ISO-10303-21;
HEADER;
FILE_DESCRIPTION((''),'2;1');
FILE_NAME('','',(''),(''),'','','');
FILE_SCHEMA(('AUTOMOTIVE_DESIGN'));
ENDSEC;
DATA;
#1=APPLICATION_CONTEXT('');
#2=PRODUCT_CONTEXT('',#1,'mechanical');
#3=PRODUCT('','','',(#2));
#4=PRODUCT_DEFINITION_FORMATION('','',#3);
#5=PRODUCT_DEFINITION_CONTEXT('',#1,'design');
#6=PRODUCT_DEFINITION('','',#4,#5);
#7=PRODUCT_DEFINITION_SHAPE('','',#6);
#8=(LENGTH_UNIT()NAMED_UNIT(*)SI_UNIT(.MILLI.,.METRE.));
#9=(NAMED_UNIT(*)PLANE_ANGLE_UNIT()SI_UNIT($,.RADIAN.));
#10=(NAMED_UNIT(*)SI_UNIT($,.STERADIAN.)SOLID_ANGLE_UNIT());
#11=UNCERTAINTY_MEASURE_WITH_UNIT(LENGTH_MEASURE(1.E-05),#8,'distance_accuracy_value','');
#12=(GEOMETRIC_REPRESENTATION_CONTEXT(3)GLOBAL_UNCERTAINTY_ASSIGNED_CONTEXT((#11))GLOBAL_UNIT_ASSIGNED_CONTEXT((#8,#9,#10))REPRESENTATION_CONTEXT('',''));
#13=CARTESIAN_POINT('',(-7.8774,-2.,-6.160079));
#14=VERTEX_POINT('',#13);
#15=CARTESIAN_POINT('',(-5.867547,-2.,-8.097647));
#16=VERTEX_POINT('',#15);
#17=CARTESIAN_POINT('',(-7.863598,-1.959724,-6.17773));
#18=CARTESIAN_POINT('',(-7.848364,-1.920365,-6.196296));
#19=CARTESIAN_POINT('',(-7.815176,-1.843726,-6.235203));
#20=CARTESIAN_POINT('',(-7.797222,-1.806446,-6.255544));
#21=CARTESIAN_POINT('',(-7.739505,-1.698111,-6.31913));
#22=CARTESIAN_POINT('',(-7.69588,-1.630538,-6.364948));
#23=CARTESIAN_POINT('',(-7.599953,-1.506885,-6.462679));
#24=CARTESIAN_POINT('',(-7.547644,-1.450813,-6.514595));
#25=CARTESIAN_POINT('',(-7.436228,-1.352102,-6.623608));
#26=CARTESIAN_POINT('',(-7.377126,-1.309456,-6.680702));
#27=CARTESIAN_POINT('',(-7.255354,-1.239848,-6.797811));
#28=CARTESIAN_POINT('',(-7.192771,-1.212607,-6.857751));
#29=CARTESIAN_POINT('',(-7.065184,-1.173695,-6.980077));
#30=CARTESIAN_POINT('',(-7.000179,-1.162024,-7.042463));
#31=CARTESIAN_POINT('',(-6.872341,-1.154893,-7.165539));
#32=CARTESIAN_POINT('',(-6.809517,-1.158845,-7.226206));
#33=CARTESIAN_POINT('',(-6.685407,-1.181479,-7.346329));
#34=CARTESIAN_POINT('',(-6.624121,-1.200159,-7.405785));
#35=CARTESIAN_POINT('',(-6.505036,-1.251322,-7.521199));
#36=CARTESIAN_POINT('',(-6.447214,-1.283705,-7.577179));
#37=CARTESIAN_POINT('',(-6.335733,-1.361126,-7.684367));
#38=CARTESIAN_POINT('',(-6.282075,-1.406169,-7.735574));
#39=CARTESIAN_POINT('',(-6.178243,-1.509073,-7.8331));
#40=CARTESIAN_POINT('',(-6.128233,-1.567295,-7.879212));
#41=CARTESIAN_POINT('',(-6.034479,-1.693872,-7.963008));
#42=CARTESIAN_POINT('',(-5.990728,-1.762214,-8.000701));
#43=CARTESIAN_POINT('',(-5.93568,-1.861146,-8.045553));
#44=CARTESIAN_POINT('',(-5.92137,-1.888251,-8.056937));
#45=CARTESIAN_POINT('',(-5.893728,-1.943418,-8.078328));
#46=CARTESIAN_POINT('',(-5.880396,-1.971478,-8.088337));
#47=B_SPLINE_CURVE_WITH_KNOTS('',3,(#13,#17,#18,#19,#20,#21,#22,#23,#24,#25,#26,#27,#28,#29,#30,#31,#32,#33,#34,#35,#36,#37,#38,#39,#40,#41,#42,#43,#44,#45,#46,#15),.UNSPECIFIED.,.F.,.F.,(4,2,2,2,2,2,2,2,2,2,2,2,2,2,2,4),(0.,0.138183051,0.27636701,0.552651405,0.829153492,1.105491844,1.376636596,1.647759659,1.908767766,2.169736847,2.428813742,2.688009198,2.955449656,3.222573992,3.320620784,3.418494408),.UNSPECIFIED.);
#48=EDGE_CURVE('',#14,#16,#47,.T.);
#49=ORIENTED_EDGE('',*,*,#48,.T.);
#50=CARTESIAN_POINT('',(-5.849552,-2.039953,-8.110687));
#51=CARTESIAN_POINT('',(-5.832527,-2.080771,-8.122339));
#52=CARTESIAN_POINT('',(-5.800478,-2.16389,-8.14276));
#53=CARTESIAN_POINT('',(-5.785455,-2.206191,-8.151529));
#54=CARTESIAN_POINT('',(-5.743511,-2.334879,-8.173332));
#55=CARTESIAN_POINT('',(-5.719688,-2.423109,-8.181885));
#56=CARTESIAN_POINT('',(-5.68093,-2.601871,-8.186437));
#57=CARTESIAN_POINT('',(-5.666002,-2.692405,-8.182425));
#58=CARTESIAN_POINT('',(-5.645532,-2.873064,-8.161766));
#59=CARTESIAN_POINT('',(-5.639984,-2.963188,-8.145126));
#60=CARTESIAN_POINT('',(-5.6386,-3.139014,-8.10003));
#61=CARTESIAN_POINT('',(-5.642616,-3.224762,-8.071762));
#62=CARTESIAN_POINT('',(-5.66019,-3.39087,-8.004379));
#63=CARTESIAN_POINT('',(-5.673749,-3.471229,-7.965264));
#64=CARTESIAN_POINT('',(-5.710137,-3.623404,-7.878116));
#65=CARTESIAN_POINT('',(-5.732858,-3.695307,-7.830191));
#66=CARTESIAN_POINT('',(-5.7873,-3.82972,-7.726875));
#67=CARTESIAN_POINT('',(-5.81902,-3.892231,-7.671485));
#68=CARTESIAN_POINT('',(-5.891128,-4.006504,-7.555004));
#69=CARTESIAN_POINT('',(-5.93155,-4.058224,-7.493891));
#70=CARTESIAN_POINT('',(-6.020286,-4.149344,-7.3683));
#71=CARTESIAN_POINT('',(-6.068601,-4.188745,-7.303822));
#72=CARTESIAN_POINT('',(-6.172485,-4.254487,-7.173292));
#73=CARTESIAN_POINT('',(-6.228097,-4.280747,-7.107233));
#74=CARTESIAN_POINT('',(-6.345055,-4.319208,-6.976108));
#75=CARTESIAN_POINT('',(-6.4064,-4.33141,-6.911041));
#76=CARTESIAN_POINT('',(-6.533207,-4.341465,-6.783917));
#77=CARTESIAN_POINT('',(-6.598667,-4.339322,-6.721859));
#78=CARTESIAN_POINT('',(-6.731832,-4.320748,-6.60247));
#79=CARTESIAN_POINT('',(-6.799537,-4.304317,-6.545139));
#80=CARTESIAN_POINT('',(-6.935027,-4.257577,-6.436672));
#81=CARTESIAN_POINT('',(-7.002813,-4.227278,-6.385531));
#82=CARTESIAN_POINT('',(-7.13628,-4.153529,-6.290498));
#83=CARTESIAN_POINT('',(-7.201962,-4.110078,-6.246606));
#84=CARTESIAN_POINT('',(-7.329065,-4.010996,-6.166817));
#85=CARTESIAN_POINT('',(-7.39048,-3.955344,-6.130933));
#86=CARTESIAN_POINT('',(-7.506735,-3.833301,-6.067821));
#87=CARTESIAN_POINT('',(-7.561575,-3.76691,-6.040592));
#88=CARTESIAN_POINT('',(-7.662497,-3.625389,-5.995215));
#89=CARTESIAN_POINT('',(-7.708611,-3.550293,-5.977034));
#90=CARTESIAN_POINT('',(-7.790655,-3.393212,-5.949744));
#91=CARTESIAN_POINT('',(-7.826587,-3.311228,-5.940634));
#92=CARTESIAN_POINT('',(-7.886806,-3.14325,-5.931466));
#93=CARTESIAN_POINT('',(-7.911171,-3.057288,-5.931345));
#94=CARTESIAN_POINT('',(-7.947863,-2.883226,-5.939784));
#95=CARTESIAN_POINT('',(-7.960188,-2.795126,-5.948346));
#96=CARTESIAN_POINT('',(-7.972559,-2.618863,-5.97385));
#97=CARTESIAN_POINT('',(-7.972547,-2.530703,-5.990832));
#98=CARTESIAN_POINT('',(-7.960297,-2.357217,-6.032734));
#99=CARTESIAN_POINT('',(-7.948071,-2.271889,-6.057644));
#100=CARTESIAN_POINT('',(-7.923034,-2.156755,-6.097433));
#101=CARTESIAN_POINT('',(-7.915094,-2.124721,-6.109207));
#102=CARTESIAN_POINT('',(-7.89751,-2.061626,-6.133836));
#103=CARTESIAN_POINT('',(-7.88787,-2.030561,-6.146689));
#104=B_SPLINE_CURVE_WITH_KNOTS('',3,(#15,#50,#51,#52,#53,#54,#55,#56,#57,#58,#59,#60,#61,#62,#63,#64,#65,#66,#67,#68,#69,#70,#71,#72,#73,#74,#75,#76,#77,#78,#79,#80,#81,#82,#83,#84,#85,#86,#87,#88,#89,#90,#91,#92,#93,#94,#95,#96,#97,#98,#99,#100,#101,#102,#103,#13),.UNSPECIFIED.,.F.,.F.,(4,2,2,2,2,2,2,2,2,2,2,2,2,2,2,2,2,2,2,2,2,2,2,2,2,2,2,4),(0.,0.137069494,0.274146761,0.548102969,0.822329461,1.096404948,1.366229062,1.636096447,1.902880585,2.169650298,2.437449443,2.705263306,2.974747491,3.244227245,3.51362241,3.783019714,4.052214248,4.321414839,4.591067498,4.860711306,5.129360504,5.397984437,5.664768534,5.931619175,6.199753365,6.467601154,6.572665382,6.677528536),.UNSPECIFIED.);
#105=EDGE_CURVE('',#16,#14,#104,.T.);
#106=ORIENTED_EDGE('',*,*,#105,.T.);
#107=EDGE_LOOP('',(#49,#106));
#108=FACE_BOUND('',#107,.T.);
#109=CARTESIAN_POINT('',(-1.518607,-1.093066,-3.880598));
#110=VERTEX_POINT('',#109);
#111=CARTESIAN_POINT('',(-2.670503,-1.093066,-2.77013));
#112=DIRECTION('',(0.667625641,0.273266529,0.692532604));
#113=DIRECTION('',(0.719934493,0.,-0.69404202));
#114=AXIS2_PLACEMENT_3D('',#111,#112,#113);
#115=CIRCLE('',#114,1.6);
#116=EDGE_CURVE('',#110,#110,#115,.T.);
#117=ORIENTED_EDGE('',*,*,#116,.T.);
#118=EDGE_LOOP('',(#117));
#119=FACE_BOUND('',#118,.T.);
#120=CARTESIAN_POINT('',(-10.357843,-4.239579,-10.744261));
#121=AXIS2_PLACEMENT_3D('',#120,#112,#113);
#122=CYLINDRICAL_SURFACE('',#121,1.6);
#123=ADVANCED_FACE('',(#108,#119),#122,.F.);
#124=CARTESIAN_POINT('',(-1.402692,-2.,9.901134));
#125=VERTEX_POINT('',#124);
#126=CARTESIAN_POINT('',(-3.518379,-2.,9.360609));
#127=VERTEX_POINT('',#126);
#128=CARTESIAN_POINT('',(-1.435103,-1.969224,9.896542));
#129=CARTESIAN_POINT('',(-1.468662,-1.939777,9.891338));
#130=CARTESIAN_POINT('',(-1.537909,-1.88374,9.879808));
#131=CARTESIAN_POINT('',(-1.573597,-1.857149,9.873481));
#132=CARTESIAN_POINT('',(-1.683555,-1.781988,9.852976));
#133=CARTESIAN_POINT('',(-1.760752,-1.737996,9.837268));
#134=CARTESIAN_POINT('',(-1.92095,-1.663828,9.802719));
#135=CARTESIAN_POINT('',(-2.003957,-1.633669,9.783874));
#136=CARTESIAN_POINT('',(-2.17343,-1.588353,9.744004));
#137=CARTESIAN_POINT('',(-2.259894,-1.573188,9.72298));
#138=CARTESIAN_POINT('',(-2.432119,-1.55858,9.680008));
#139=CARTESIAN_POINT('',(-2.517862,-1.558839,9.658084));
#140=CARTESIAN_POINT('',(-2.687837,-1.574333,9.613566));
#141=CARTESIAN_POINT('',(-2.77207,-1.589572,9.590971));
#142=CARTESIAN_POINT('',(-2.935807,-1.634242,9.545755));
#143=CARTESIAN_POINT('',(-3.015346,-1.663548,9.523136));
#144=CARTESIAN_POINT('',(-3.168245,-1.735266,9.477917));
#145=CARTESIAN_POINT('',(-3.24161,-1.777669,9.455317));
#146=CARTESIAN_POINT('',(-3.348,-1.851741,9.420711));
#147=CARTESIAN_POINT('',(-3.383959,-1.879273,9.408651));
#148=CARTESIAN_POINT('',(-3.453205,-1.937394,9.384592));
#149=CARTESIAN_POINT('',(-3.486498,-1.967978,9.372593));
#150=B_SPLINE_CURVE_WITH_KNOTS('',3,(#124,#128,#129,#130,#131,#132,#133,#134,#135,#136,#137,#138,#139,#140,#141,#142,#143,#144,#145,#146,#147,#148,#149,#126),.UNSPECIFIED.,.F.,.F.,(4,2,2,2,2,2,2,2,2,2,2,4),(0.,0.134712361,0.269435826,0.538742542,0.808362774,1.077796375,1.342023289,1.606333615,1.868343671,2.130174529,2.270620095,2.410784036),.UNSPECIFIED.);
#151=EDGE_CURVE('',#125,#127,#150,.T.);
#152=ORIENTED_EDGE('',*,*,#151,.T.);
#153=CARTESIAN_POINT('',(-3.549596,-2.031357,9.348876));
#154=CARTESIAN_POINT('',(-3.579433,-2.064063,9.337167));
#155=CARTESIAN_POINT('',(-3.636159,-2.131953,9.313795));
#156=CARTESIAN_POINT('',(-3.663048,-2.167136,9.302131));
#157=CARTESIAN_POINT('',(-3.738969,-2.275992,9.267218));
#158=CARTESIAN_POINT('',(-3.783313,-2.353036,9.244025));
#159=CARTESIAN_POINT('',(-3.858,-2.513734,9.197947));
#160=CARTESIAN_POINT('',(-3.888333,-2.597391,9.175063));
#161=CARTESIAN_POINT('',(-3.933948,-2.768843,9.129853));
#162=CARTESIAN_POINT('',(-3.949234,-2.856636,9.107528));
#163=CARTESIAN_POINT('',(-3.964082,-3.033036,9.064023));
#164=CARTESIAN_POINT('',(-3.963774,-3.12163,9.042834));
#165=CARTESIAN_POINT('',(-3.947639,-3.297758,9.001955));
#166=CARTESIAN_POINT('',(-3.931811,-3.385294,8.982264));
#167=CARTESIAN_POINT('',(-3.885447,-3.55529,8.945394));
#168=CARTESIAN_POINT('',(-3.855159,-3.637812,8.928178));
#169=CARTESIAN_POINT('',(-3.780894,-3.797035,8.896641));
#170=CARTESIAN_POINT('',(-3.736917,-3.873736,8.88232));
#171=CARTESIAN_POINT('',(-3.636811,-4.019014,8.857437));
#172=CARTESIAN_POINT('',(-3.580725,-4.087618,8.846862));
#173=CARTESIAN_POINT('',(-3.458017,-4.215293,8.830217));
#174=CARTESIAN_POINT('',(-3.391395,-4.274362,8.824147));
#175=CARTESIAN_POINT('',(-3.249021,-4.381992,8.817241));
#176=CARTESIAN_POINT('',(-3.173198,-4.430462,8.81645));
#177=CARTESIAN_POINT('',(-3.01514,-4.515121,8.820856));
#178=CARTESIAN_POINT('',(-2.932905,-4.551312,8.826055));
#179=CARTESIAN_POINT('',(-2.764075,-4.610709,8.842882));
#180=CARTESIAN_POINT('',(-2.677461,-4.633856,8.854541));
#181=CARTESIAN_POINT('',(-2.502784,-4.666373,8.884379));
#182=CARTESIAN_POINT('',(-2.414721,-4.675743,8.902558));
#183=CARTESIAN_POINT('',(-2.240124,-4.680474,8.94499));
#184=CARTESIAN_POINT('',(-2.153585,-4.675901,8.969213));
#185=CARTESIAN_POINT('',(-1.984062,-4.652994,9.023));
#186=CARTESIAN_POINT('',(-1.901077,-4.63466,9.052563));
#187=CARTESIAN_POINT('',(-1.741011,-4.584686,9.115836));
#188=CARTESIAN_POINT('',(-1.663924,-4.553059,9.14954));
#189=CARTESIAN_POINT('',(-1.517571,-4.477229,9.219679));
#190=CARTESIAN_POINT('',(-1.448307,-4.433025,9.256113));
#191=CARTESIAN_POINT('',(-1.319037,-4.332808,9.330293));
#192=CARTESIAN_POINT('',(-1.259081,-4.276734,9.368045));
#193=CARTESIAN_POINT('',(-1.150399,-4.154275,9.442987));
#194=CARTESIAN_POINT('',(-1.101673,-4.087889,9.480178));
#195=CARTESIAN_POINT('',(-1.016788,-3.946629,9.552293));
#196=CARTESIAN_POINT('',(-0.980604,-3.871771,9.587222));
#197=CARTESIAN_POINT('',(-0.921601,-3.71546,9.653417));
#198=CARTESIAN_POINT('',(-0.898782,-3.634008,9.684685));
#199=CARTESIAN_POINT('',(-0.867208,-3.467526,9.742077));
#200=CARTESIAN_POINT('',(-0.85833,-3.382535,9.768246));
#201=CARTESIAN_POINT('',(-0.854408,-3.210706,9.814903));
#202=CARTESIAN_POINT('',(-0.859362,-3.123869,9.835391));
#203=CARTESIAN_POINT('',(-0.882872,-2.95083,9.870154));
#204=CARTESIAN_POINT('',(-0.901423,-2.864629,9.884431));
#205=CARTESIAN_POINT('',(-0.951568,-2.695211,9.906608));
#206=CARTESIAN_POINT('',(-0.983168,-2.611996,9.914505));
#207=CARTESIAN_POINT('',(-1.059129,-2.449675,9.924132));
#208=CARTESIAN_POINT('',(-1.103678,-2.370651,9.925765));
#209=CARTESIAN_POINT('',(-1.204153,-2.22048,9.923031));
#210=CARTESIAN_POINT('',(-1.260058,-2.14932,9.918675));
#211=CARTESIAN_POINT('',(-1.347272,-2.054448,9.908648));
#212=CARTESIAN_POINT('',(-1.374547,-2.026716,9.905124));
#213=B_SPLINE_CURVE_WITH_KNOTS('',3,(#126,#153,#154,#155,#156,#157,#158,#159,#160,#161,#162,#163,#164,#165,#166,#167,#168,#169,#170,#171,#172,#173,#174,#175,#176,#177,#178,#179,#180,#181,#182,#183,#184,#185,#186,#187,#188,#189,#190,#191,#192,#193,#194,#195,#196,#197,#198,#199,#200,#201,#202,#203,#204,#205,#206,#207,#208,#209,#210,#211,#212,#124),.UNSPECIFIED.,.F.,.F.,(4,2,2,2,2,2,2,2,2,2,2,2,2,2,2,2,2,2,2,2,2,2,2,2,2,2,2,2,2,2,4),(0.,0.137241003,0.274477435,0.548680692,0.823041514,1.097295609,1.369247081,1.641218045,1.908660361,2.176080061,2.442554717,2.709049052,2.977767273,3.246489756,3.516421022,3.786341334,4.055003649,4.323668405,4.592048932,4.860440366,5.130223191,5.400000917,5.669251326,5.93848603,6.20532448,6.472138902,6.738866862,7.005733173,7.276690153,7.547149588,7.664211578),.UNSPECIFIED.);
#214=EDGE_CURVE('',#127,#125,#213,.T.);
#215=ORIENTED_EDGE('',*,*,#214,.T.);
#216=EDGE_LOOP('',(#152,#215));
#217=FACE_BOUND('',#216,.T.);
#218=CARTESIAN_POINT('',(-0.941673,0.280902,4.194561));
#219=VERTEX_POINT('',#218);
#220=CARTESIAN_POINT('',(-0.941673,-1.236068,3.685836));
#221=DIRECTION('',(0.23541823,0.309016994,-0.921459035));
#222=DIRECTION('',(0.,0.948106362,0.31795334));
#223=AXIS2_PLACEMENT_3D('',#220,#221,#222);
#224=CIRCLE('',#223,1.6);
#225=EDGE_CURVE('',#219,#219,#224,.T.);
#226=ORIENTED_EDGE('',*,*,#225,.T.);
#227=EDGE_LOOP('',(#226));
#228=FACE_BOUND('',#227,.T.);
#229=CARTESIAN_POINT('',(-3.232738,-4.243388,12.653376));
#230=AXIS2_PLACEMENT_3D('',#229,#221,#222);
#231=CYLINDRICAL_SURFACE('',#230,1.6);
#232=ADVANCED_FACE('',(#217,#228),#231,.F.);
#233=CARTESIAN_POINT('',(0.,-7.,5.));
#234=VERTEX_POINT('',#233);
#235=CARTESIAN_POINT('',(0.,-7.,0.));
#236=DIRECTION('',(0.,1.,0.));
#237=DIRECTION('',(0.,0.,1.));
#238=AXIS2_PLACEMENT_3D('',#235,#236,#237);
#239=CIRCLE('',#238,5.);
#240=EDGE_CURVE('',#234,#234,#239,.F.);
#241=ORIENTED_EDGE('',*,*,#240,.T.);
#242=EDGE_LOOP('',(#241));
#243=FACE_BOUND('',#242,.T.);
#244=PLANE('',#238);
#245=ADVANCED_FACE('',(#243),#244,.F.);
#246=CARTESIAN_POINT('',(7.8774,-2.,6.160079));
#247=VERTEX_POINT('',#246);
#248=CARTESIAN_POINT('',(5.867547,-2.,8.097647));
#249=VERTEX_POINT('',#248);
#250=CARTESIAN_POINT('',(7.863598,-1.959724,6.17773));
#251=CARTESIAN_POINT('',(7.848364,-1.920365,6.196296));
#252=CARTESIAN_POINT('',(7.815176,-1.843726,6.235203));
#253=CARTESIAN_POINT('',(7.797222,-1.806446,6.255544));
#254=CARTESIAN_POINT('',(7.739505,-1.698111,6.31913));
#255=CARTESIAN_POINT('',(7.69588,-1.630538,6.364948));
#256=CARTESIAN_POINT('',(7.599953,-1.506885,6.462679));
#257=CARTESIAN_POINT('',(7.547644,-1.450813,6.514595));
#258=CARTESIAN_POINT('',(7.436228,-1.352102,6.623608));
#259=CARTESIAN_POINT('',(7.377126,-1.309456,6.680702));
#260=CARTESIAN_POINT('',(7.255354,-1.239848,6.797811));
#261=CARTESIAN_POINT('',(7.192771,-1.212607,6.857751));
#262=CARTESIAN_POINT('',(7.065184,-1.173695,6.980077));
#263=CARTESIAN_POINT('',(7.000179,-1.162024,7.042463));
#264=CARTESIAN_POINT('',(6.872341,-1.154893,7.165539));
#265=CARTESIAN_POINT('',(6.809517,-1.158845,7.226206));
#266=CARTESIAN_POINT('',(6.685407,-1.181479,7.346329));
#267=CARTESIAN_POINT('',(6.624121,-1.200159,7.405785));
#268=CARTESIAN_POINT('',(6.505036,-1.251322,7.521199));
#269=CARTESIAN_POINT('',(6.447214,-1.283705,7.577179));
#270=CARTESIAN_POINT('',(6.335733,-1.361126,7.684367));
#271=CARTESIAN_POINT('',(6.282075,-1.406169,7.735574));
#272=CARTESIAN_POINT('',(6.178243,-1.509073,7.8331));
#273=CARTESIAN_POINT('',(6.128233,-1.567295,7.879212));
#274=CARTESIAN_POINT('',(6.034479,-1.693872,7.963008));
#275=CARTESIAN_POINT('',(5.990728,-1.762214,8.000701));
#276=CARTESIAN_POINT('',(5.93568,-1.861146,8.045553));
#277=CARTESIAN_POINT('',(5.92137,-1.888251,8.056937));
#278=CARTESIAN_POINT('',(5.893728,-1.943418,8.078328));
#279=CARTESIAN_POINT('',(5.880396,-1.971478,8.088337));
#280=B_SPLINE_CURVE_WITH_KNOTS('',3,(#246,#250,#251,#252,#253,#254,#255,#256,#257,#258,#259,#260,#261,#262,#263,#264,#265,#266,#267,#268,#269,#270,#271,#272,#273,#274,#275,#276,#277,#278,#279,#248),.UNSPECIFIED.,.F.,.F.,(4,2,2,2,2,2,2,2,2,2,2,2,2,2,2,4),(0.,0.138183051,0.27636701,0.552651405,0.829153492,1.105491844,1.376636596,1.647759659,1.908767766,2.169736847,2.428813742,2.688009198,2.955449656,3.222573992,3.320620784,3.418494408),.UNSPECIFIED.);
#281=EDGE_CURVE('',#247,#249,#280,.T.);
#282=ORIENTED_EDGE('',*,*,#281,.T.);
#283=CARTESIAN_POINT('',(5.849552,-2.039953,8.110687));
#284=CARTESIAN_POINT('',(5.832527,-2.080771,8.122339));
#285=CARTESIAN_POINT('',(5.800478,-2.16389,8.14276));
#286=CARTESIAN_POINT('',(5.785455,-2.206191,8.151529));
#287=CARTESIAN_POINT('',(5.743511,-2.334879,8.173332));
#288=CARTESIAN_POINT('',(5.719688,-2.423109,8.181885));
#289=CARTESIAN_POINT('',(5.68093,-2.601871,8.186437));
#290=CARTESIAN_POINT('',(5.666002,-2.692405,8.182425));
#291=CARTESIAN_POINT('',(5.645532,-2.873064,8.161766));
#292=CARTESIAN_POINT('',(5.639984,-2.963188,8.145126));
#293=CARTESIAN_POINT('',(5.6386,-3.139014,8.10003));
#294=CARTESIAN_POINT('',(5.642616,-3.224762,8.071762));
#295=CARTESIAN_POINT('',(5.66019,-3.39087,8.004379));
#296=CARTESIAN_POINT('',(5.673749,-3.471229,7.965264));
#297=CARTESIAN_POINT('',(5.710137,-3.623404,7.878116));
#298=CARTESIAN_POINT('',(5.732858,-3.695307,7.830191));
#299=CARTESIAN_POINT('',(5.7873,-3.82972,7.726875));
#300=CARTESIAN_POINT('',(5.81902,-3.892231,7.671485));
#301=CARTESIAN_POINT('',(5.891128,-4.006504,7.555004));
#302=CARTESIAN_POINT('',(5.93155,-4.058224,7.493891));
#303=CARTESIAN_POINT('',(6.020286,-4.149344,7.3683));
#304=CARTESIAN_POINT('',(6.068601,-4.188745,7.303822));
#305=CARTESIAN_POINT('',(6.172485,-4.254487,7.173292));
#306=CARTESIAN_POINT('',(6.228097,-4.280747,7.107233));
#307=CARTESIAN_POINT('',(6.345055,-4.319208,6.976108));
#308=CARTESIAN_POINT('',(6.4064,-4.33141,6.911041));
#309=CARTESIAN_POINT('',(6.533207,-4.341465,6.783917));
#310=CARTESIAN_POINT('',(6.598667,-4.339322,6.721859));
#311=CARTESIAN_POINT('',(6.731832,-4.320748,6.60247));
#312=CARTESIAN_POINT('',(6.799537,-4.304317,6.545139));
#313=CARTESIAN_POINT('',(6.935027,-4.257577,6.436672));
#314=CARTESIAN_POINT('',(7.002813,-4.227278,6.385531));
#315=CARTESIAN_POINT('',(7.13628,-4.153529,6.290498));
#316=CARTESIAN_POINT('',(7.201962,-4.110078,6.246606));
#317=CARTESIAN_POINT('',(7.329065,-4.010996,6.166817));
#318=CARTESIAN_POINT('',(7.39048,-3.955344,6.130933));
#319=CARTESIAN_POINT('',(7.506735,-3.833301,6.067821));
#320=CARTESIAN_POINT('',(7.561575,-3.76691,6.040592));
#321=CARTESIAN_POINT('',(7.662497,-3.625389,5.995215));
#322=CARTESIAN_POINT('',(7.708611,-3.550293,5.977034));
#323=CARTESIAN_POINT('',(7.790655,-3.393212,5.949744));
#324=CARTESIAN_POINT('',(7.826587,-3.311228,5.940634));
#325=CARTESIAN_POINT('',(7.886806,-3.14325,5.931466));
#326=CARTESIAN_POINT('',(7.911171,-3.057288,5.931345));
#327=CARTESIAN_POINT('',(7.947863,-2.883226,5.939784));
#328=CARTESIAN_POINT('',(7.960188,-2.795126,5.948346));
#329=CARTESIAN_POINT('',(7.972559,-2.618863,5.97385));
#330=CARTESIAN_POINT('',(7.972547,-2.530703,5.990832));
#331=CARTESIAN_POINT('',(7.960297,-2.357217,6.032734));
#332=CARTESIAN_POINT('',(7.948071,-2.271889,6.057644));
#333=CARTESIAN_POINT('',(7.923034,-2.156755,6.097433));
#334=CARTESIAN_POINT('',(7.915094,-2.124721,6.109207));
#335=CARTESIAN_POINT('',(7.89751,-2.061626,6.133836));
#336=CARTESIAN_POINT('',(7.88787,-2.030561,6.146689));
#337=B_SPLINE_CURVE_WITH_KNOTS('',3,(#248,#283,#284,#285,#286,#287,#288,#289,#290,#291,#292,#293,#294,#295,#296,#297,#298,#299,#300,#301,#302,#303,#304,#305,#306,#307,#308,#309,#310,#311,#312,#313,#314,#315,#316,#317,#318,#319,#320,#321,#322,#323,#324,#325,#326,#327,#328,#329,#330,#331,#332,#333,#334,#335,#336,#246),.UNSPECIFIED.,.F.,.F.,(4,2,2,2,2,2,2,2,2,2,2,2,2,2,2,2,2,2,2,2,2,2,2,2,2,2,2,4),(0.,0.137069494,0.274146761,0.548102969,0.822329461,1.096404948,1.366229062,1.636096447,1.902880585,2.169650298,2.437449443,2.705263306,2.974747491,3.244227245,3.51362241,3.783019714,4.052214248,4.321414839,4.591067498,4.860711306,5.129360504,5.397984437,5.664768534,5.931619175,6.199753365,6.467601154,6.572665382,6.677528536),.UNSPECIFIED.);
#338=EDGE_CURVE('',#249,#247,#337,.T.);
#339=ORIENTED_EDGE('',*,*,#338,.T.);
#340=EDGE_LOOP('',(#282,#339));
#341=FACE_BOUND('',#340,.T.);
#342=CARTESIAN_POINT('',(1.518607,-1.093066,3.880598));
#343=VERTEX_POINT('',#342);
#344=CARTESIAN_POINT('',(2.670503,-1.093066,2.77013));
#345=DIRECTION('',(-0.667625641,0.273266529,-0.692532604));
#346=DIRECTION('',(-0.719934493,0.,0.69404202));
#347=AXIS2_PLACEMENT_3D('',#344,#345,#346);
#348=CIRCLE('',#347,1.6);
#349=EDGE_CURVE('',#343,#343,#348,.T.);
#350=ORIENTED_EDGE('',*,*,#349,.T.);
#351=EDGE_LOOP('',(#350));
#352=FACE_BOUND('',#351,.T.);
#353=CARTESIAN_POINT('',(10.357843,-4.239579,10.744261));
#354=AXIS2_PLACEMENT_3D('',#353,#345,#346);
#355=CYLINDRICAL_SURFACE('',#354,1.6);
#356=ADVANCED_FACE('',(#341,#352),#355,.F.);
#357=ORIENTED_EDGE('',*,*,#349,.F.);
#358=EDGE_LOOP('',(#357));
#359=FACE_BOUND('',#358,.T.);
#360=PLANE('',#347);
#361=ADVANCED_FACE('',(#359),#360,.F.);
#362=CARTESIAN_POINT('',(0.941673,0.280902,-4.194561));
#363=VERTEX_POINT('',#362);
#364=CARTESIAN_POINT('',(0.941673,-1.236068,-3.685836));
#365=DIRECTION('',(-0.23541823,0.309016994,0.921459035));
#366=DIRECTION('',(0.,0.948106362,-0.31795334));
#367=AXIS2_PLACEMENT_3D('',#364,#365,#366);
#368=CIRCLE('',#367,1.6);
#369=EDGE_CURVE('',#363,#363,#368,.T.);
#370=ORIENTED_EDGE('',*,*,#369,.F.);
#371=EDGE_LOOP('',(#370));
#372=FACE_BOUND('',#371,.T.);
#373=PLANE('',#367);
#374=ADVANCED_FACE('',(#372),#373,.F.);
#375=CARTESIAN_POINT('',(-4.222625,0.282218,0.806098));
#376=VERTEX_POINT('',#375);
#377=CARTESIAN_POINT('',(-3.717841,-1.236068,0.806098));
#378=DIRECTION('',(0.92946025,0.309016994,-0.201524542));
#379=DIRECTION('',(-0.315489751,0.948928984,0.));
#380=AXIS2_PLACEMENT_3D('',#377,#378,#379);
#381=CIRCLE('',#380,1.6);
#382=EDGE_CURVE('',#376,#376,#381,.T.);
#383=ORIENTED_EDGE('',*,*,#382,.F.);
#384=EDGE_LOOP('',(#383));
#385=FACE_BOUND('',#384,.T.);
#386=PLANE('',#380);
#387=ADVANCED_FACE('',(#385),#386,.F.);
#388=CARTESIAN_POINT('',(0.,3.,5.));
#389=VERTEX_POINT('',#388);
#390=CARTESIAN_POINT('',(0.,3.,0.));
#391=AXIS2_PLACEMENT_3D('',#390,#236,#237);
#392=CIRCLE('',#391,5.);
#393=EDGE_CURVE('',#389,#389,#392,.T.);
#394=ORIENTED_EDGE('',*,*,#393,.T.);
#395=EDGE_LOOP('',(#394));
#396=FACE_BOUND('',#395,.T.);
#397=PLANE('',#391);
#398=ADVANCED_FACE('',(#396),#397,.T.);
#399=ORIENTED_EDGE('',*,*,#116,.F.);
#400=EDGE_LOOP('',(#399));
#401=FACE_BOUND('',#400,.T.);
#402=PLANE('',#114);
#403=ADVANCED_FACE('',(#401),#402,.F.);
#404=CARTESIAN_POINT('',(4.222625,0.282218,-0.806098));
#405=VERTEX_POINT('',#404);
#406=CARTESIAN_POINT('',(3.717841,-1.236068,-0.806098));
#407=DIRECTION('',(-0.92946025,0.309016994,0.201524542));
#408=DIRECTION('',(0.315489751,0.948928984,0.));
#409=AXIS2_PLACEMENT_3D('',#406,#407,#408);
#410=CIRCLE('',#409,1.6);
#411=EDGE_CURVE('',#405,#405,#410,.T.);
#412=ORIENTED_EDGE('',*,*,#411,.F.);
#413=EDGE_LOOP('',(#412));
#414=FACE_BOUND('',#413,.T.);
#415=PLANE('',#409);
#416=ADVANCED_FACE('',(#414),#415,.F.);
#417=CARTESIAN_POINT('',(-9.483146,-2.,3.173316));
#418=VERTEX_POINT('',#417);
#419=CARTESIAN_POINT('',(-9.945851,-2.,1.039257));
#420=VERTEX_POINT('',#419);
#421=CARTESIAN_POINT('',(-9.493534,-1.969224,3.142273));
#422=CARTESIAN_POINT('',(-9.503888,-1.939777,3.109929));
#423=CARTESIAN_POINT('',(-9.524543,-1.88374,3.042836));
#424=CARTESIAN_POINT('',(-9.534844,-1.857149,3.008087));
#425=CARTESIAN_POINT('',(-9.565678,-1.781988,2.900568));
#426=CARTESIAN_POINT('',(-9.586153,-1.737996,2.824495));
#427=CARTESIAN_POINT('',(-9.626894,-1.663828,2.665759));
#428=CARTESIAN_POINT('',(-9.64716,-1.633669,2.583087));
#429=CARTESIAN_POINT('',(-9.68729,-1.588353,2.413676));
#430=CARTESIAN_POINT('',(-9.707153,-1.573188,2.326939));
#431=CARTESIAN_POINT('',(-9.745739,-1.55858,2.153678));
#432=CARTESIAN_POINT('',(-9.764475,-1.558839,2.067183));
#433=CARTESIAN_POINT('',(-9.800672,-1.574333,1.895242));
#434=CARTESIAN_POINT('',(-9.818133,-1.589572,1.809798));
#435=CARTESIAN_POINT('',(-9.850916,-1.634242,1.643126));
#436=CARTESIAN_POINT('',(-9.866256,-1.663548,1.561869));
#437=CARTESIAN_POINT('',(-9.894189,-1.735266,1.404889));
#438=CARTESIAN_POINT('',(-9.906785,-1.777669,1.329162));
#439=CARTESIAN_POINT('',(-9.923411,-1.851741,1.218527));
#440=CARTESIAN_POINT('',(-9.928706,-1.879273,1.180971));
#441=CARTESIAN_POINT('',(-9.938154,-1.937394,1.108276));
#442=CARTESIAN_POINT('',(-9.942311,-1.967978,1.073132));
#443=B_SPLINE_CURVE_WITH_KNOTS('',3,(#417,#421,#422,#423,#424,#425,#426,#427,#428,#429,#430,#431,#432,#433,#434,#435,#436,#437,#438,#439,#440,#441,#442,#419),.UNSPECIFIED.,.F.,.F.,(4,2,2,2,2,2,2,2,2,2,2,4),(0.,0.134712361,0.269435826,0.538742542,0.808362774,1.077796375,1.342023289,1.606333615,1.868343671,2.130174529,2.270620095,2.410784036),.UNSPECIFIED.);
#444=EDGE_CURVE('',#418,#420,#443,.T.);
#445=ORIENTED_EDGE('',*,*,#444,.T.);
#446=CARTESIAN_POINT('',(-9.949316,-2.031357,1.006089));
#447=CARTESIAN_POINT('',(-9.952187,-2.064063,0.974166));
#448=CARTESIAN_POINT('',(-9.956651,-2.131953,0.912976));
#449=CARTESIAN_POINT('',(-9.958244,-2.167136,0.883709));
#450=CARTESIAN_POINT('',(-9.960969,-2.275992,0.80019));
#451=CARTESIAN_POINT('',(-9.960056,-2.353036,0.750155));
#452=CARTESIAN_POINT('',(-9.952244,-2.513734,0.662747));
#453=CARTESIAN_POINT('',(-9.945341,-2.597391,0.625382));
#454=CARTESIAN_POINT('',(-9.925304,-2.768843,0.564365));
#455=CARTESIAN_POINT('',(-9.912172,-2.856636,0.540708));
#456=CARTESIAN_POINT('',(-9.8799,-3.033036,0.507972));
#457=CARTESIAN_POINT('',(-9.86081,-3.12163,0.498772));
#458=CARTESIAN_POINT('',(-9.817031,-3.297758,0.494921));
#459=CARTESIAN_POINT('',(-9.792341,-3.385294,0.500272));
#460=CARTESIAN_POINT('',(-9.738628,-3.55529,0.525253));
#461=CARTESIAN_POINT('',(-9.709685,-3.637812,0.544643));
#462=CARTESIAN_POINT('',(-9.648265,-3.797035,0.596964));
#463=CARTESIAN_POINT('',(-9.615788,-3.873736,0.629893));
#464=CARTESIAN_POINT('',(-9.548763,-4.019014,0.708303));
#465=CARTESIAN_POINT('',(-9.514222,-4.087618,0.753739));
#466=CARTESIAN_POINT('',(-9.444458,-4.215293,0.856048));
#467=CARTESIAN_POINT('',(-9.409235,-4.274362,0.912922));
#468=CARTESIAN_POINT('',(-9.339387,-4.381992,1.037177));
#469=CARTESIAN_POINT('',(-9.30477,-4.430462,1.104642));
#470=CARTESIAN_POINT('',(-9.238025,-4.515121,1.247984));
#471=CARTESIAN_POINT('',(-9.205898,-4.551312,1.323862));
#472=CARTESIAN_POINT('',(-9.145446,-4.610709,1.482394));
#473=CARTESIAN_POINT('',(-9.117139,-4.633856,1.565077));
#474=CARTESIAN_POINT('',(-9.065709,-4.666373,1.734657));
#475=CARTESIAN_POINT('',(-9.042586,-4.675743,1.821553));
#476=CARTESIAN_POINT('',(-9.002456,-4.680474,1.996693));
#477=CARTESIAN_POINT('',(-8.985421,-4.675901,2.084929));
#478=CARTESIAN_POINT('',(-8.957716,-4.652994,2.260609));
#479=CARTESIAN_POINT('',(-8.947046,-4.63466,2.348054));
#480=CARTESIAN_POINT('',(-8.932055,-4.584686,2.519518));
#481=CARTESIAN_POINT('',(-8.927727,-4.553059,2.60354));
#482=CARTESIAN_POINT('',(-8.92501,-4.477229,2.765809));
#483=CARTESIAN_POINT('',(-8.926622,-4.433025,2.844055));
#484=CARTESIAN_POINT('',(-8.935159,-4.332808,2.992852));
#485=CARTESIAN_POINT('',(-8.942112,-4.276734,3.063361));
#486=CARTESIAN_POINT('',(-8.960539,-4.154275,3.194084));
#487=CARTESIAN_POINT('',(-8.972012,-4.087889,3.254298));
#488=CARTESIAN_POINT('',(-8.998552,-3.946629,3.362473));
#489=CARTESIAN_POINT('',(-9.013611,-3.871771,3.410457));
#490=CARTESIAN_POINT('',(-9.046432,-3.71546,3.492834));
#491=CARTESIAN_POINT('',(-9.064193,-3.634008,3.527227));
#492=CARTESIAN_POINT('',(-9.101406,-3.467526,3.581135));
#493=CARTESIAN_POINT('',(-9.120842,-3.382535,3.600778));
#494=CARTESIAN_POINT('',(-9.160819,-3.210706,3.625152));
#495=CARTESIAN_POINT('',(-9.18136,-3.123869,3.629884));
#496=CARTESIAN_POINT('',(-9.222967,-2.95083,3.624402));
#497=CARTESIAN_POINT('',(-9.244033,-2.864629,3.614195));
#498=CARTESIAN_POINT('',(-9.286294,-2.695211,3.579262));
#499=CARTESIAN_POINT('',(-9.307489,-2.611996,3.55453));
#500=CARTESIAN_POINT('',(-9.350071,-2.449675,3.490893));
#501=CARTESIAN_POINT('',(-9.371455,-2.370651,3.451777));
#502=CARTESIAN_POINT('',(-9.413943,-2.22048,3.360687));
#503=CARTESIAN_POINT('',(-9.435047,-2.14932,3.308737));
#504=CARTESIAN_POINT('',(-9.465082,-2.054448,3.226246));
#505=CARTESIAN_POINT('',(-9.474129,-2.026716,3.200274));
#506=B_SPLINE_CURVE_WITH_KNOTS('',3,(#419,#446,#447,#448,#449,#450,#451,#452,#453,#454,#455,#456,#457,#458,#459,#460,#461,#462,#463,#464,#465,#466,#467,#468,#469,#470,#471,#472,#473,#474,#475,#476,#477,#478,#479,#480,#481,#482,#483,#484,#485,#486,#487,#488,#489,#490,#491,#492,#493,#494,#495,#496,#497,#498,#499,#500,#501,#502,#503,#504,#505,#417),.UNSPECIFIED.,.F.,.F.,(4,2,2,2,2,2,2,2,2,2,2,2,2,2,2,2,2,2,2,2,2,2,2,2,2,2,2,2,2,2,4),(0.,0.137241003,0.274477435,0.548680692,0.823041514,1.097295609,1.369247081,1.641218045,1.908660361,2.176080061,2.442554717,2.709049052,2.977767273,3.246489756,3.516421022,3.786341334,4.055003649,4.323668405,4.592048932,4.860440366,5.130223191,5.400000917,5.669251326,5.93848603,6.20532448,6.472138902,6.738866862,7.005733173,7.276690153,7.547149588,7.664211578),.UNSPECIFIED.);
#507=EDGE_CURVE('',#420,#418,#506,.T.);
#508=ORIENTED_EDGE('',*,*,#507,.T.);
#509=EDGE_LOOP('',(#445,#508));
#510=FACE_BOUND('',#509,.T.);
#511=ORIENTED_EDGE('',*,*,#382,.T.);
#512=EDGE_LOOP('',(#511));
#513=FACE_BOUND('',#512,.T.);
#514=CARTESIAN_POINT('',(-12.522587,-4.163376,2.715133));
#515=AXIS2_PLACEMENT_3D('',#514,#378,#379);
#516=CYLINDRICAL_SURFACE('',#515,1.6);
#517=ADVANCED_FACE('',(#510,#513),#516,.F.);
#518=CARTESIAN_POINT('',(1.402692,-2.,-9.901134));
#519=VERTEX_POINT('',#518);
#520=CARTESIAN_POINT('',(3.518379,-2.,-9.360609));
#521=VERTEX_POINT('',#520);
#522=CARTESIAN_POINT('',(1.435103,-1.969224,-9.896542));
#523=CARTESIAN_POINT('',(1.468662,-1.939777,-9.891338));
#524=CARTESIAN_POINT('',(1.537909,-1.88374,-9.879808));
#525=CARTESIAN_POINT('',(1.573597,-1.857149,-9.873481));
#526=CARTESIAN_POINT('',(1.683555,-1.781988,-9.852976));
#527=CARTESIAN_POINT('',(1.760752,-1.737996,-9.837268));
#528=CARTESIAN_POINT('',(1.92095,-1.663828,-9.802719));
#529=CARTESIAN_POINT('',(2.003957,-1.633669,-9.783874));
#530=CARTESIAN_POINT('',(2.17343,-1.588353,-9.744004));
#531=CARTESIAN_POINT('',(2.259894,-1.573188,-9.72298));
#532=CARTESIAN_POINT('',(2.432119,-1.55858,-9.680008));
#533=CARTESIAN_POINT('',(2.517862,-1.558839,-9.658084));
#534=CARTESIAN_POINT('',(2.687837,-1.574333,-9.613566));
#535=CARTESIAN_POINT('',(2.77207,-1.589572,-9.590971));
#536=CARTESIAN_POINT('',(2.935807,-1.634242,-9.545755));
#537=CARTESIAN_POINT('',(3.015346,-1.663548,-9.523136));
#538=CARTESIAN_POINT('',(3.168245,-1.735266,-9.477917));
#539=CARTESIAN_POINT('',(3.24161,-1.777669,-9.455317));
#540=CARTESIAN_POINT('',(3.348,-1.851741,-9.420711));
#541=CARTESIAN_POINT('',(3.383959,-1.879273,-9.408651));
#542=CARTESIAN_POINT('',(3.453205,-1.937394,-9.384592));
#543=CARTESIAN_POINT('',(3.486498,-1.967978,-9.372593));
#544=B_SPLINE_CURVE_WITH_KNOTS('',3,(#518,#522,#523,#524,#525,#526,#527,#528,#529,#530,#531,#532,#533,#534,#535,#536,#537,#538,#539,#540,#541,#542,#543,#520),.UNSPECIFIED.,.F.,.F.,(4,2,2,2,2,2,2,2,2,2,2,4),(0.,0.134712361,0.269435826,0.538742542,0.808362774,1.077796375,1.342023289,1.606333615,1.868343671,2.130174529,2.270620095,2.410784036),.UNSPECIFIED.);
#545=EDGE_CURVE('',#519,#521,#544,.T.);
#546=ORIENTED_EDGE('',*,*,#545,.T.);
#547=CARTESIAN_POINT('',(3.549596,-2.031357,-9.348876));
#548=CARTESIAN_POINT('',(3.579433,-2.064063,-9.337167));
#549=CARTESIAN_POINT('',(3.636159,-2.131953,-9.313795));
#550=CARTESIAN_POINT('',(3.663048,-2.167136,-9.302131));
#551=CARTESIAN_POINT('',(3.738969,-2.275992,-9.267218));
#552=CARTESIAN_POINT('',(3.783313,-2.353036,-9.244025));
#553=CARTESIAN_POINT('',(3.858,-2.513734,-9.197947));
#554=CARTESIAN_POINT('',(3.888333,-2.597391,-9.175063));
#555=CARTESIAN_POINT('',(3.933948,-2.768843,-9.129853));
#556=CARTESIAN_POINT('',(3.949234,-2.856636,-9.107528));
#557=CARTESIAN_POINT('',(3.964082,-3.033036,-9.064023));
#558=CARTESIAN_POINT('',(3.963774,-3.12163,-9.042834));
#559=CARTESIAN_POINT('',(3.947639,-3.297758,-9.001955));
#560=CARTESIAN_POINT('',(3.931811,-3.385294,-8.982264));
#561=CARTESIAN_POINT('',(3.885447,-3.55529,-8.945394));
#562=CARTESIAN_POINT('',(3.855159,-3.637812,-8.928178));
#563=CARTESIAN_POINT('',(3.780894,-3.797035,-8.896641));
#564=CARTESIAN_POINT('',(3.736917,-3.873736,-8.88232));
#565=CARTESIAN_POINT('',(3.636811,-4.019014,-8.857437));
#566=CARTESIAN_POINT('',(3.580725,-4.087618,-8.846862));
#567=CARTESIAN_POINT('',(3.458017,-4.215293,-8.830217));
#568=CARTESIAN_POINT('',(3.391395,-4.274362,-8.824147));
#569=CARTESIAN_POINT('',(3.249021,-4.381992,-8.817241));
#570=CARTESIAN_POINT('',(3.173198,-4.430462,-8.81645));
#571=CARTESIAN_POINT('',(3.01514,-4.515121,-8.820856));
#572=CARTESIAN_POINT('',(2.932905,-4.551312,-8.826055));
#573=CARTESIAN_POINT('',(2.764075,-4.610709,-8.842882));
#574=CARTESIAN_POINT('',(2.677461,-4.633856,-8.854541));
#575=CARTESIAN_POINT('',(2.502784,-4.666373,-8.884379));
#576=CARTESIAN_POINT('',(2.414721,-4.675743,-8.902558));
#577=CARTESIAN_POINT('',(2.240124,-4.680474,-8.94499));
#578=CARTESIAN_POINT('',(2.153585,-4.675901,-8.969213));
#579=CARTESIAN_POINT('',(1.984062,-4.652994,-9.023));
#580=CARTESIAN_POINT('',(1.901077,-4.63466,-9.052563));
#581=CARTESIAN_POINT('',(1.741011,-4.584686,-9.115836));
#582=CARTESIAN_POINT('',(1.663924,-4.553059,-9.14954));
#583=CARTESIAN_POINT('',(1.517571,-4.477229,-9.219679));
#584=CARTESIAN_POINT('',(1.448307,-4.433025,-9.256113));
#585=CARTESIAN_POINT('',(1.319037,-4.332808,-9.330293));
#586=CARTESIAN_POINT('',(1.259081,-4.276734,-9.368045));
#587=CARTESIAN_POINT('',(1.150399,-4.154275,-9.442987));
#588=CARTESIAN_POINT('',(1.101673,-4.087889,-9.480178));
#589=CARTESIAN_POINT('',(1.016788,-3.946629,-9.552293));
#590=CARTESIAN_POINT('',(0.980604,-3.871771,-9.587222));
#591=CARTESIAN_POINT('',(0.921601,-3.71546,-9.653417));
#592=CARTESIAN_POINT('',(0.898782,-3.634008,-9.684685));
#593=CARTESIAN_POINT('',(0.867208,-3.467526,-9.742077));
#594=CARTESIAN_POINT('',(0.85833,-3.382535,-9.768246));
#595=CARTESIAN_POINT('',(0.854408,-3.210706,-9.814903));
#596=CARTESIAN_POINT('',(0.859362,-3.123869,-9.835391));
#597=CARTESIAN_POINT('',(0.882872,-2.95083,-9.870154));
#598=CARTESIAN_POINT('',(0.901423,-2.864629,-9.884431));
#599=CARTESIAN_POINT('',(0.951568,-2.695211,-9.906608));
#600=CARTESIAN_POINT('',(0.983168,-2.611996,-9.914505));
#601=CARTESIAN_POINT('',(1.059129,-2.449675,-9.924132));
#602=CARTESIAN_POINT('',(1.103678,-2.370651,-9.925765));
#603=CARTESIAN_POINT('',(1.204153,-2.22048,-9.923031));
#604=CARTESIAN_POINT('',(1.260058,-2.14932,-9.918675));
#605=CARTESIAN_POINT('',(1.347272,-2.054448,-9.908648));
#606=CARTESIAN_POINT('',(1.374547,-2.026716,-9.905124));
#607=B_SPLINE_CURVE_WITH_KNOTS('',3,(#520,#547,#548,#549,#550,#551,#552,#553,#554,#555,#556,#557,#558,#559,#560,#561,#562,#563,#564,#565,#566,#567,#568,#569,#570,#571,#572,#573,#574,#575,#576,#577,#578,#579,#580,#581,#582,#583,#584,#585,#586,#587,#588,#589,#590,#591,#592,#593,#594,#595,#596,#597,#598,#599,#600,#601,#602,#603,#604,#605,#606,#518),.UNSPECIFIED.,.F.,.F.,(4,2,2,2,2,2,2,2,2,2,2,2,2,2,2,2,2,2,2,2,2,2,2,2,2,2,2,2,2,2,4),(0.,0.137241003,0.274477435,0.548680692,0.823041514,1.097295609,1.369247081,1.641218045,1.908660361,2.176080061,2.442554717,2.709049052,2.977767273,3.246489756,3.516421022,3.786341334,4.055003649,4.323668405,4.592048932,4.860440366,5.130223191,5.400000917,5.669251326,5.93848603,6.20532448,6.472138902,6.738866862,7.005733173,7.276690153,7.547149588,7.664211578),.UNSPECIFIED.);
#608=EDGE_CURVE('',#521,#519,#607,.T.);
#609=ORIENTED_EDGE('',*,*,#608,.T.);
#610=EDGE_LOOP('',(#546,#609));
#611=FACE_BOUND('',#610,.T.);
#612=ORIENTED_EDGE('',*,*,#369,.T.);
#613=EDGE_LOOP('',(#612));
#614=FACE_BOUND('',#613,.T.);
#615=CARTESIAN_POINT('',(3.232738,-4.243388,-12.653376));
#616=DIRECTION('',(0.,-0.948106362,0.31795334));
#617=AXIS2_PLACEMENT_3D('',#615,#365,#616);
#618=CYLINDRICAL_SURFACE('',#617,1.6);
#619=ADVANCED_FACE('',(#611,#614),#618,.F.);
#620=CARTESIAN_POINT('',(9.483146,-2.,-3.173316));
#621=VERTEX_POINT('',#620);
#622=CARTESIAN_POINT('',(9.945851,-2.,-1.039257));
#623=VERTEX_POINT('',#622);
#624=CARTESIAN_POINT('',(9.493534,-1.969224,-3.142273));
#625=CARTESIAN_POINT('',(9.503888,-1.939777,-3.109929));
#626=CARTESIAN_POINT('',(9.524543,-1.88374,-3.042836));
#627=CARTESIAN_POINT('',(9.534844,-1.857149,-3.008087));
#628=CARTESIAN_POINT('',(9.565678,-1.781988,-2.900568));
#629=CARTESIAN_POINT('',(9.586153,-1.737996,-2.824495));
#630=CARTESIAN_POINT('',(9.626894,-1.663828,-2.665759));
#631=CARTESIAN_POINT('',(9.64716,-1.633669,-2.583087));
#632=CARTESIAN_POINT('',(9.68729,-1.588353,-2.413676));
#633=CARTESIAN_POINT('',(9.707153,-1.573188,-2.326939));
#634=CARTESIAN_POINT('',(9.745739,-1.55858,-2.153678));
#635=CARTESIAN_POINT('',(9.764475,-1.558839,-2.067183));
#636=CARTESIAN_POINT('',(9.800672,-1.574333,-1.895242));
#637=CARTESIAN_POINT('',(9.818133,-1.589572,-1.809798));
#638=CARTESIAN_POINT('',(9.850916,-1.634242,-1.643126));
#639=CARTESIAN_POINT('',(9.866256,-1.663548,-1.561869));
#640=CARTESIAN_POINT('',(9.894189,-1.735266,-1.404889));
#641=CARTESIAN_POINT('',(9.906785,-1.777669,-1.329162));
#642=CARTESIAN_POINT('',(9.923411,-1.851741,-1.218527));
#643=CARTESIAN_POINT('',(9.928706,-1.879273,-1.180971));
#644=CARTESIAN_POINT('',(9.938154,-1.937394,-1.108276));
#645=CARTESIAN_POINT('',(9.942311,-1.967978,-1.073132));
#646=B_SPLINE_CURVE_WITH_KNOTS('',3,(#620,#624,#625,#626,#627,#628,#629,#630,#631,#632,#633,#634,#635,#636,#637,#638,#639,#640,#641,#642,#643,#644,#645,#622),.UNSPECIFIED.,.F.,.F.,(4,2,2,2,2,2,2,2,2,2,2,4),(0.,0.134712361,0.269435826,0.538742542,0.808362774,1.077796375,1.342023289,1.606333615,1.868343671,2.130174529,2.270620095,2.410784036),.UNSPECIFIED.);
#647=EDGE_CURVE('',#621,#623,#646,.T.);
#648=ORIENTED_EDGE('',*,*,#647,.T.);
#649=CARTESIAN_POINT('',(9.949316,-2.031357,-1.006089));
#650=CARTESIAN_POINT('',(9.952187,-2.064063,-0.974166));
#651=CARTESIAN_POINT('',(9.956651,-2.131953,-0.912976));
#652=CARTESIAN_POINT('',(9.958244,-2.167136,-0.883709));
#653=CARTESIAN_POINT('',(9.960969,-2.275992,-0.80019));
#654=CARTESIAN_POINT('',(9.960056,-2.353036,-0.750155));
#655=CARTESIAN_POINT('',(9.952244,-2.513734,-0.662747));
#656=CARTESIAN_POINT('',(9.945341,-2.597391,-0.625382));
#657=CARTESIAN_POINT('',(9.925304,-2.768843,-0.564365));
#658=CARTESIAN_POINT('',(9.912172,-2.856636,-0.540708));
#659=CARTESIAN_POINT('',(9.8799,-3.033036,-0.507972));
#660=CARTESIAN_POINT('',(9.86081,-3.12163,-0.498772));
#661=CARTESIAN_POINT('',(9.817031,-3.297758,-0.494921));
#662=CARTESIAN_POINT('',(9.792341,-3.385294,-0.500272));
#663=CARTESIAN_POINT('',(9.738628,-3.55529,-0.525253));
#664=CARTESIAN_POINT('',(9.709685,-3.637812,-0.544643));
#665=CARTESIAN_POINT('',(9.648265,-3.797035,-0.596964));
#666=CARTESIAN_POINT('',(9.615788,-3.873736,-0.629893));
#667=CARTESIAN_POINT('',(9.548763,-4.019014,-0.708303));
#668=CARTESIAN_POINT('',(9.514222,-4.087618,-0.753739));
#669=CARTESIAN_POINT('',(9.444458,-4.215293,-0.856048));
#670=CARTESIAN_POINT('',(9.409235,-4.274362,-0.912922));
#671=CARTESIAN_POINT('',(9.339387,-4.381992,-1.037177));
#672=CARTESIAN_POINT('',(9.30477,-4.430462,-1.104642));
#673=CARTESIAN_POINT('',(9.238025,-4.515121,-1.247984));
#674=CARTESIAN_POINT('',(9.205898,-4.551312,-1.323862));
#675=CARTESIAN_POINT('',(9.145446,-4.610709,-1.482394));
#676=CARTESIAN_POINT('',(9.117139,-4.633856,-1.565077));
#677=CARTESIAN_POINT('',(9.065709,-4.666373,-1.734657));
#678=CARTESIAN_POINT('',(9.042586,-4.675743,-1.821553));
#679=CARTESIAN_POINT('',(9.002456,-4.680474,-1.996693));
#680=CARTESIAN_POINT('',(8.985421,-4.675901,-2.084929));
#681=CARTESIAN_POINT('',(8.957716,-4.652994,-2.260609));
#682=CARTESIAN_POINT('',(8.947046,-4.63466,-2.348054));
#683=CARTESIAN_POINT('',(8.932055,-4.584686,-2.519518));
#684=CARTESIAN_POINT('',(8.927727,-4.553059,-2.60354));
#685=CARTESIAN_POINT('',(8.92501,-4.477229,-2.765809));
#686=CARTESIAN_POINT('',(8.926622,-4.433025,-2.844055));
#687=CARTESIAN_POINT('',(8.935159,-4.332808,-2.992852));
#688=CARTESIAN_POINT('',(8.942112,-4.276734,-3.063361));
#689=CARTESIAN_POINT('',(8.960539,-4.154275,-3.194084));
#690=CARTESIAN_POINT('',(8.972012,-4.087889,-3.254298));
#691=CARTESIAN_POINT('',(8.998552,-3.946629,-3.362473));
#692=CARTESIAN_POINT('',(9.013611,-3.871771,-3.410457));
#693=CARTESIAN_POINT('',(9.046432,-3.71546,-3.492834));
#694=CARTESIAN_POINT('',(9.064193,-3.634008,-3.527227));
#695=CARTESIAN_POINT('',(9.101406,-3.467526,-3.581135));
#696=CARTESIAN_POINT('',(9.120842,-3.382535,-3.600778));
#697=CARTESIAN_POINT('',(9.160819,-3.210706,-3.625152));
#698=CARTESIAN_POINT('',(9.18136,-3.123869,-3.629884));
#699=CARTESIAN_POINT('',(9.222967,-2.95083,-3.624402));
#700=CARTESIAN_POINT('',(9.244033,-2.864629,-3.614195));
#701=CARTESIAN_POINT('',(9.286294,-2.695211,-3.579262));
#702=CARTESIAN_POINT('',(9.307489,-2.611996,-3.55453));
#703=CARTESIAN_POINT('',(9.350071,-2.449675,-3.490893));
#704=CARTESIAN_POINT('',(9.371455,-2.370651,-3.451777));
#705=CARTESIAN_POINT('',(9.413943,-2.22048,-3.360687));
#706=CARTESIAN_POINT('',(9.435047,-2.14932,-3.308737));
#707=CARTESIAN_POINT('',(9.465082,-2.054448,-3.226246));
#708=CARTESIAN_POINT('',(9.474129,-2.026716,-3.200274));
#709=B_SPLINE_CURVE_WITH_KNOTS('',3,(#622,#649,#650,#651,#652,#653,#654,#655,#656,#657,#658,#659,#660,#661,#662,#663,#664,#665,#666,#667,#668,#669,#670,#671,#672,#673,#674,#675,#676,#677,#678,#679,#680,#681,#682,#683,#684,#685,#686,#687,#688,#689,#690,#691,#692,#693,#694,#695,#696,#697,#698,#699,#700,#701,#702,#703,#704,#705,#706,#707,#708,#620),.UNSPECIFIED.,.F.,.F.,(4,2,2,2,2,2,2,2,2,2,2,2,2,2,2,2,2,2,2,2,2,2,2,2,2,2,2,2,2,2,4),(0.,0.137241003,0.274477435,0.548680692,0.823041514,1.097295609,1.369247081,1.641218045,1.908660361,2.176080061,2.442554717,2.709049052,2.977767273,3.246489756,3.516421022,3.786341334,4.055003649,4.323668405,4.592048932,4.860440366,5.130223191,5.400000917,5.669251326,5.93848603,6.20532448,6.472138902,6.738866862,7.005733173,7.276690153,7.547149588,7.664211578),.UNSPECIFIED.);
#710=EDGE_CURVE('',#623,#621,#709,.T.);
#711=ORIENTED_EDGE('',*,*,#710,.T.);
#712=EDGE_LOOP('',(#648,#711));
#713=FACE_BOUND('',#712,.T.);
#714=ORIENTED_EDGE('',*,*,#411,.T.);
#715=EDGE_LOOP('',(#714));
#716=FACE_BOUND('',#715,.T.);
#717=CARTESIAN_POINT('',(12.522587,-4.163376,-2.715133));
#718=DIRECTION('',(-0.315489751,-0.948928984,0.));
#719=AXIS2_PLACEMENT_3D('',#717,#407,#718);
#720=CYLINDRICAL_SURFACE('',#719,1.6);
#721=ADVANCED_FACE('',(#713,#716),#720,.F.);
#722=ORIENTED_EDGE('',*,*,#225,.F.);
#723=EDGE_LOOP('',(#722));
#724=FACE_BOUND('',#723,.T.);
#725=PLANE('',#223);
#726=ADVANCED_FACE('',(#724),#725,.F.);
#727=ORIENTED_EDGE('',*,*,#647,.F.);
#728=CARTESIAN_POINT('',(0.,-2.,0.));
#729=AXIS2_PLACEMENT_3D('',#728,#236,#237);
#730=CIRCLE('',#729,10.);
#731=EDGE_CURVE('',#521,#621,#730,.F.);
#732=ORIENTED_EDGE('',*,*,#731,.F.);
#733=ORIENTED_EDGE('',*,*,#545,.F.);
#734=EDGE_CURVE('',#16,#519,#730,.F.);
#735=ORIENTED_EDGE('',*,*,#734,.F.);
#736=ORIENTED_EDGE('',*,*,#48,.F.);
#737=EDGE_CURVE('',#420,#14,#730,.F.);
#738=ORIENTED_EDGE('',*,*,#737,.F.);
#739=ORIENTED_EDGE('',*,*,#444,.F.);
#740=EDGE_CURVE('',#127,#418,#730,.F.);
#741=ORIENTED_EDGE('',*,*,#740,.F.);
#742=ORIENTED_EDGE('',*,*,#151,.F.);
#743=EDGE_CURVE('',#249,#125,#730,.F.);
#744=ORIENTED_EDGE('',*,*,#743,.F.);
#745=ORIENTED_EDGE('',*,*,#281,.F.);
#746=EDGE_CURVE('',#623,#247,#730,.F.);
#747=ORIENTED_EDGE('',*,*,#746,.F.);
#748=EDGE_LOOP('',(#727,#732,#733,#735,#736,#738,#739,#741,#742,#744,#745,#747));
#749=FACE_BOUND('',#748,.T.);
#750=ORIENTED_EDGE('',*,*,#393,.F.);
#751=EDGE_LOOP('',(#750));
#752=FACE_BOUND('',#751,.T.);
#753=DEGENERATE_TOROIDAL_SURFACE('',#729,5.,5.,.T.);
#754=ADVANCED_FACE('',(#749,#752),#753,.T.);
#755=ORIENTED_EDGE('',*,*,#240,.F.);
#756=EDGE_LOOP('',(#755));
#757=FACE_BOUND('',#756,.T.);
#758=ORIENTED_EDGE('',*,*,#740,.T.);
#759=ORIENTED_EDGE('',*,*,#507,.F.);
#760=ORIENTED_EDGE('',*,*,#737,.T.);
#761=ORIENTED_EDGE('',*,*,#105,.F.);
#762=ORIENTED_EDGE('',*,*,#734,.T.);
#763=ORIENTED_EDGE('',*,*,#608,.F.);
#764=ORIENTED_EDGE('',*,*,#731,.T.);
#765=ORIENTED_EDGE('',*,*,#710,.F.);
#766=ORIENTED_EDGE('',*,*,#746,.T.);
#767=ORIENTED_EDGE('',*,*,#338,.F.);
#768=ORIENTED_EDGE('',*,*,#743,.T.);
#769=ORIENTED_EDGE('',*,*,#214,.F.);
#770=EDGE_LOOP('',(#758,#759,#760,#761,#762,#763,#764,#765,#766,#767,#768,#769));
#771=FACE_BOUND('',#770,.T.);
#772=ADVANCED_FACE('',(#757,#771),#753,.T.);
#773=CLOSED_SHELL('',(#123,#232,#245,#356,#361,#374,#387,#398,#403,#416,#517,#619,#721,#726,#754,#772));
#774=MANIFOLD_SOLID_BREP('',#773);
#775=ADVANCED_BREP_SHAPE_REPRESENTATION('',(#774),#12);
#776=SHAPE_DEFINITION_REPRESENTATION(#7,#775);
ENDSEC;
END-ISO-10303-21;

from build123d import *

# Parameters (mm, degrees)
BASE_DEPTH        = 3
BASE_DEPTH_BACK   = 7
SKETCH1_R         = 10
SKETCH2_R         = 1.6
HOLE1_DEPTH       = 19.934353276
HOLE1MIRROR_COUNT = 2
SKETCH3_R         = 1.6
HOLE2_DEPTH       = 19.445737601
HOLE2MIRROR_COUNT = 2
SKETCH4_R         = 1.6
HOLE3_DEPTH       = 19.389503466
HOLE3MIRROR_COUNT = 2
FILLET1_R         = 5


with BuildPart() as part:
    # Sketch1 → base (new, two sides: drawn at the far end of the back side and taken through both)
    with BuildSketch(Plane(origin=(0, 0, 0), x_dir=(1, 0, 0), z_dir=(0, 1, 0)).offset(-BASE_DEPTH_BACK)):
        with Locations(Location((0, 0, 0), (0, 0, 270))):
            Circle(SKETCH1_R)
    extrude(amount=BASE_DEPTH + BASE_DEPTH_BACK)

    # Sketch2 → hole1 (cut, through all)
    with BuildSketch(Plane(origin=(2.670502563, -1.093066116, 2.770130417), x_dir=(-0.6558691872850446, 0.22429081675253856, 0.7207837669443827), z_dir=(-0.6676256406563905, 0.27326652891267483, -0.692532604369038))):
        with Locations(Location((0, 0, 0), (0, 0, 346.516491398))):
            Circle(SKETCH2_R)
    hole1 = extrude(amount=-HOLE1_DEPTH, mode=Mode.SUBTRACT)

    # hole1mirror: hole1 ×2 about axis
    hole1mirror_axis = Axis((0, 5.5, 0), (0, -1, 0))
    for i in range(1, HOLE1MIRROR_COUNT):
        add(hole1.rotate(hole1mirror_axis, i * 360 / HOLE1MIRROR_COUNT), mode=Mode.SUBTRACT)

    # Sketch3 → hole2 (cut, through all)
    with BuildSketch(Plane(origin=(-0.941672921, -1.236067977, 3.685836142), x_dir=(-0.9718935871364875, 0.07382318789513377, -0.22354639834264944), z_dir=(0.23541823021467095, 0.3090169943749464, -0.921459035481267))):
        with Locations(Location((0, 0, 0), (0, 0, 90.062171088))):
            Circle(SKETCH3_R)
    hole2 = extrude(amount=-HOLE2_DEPTH, mode=Mode.SUBTRACT)

    # hole2mirror: hole2 ×2 about axis
    hole2mirror_axis = Axis((0, 5.5, 0), (0, -1, 0))
    for i in range(1, HOLE2MIRROR_COUNT):
        add(hole2.rotate(hole2mirror_axis, i * 360 / HOLE2MIRROR_COUNT), mode=Mode.SUBTRACT)

    # Sketch4 → hole3 (cut, through all)
    with BuildSketch(Plane(origin=(-3.717841, -1.236067977, 0.806098168), x_dir=(-0.19123247894507908, -0.06357892752956036, -0.979483465389136), z_dir=(0.9294602499075393, 0.30901699437494623, -0.20152454200243008))):
        with Locations(Location((0, 0, 0), (0, 0, 90))):
            Circle(SKETCH4_R)
    hole3 = extrude(amount=-HOLE3_DEPTH, mode=Mode.SUBTRACT)

    # hole3mirror: hole3 ×2 about axis
    hole3mirror_axis = Axis((0, 5.5, 0), (0, -1, 0))
    for i in range(1, HOLE3MIRROR_COUNT):
        add(hole3.rotate(hole3mirror_axis, i * 360 / HOLE3MIRROR_COUNT), mode=Mode.SUBTRACT)

    # Fillet1
    # the kernel refuses this fillet: 5 mm, written as the material it takes off along each edge
    with BuildSketch(Plane(origin=(0, -7, 0), x_dir=(0, 0, 1), z_dir=(-1, 0, 0))) as fillet1_piece_1:
        with BuildLine():
            CenterArc((10 - FILLET1_R, FILLET1_R), FILLET1_R, 270, 90)
            Line((10 - FILLET1_R, 0), (10, 0))
            Line((10, 0), (10, FILLET1_R))
        make_face()
    revolve(axis=Axis((0, -7, 0), (0, 1, 0)), mode=Mode.SUBTRACT)
    with BuildSketch(Plane(origin=(0, 3, 0), x_dir=(0, 0, 1), z_dir=(-1, 0, 0))) as fillet1_piece_2:
        with BuildLine():
            CenterArc((10 - FILLET1_R, -FILLET1_R), FILLET1_R, 0, 90)
            Line((10 - FILLET1_R, 0), (10, 0))
            Line((10, 0), (10, -FILLET1_R))
        make_face()
    revolve(axis=Axis((0, 3, 0), (0, 1, 0)), mode=Mode.SUBTRACT)


solid = part.part
